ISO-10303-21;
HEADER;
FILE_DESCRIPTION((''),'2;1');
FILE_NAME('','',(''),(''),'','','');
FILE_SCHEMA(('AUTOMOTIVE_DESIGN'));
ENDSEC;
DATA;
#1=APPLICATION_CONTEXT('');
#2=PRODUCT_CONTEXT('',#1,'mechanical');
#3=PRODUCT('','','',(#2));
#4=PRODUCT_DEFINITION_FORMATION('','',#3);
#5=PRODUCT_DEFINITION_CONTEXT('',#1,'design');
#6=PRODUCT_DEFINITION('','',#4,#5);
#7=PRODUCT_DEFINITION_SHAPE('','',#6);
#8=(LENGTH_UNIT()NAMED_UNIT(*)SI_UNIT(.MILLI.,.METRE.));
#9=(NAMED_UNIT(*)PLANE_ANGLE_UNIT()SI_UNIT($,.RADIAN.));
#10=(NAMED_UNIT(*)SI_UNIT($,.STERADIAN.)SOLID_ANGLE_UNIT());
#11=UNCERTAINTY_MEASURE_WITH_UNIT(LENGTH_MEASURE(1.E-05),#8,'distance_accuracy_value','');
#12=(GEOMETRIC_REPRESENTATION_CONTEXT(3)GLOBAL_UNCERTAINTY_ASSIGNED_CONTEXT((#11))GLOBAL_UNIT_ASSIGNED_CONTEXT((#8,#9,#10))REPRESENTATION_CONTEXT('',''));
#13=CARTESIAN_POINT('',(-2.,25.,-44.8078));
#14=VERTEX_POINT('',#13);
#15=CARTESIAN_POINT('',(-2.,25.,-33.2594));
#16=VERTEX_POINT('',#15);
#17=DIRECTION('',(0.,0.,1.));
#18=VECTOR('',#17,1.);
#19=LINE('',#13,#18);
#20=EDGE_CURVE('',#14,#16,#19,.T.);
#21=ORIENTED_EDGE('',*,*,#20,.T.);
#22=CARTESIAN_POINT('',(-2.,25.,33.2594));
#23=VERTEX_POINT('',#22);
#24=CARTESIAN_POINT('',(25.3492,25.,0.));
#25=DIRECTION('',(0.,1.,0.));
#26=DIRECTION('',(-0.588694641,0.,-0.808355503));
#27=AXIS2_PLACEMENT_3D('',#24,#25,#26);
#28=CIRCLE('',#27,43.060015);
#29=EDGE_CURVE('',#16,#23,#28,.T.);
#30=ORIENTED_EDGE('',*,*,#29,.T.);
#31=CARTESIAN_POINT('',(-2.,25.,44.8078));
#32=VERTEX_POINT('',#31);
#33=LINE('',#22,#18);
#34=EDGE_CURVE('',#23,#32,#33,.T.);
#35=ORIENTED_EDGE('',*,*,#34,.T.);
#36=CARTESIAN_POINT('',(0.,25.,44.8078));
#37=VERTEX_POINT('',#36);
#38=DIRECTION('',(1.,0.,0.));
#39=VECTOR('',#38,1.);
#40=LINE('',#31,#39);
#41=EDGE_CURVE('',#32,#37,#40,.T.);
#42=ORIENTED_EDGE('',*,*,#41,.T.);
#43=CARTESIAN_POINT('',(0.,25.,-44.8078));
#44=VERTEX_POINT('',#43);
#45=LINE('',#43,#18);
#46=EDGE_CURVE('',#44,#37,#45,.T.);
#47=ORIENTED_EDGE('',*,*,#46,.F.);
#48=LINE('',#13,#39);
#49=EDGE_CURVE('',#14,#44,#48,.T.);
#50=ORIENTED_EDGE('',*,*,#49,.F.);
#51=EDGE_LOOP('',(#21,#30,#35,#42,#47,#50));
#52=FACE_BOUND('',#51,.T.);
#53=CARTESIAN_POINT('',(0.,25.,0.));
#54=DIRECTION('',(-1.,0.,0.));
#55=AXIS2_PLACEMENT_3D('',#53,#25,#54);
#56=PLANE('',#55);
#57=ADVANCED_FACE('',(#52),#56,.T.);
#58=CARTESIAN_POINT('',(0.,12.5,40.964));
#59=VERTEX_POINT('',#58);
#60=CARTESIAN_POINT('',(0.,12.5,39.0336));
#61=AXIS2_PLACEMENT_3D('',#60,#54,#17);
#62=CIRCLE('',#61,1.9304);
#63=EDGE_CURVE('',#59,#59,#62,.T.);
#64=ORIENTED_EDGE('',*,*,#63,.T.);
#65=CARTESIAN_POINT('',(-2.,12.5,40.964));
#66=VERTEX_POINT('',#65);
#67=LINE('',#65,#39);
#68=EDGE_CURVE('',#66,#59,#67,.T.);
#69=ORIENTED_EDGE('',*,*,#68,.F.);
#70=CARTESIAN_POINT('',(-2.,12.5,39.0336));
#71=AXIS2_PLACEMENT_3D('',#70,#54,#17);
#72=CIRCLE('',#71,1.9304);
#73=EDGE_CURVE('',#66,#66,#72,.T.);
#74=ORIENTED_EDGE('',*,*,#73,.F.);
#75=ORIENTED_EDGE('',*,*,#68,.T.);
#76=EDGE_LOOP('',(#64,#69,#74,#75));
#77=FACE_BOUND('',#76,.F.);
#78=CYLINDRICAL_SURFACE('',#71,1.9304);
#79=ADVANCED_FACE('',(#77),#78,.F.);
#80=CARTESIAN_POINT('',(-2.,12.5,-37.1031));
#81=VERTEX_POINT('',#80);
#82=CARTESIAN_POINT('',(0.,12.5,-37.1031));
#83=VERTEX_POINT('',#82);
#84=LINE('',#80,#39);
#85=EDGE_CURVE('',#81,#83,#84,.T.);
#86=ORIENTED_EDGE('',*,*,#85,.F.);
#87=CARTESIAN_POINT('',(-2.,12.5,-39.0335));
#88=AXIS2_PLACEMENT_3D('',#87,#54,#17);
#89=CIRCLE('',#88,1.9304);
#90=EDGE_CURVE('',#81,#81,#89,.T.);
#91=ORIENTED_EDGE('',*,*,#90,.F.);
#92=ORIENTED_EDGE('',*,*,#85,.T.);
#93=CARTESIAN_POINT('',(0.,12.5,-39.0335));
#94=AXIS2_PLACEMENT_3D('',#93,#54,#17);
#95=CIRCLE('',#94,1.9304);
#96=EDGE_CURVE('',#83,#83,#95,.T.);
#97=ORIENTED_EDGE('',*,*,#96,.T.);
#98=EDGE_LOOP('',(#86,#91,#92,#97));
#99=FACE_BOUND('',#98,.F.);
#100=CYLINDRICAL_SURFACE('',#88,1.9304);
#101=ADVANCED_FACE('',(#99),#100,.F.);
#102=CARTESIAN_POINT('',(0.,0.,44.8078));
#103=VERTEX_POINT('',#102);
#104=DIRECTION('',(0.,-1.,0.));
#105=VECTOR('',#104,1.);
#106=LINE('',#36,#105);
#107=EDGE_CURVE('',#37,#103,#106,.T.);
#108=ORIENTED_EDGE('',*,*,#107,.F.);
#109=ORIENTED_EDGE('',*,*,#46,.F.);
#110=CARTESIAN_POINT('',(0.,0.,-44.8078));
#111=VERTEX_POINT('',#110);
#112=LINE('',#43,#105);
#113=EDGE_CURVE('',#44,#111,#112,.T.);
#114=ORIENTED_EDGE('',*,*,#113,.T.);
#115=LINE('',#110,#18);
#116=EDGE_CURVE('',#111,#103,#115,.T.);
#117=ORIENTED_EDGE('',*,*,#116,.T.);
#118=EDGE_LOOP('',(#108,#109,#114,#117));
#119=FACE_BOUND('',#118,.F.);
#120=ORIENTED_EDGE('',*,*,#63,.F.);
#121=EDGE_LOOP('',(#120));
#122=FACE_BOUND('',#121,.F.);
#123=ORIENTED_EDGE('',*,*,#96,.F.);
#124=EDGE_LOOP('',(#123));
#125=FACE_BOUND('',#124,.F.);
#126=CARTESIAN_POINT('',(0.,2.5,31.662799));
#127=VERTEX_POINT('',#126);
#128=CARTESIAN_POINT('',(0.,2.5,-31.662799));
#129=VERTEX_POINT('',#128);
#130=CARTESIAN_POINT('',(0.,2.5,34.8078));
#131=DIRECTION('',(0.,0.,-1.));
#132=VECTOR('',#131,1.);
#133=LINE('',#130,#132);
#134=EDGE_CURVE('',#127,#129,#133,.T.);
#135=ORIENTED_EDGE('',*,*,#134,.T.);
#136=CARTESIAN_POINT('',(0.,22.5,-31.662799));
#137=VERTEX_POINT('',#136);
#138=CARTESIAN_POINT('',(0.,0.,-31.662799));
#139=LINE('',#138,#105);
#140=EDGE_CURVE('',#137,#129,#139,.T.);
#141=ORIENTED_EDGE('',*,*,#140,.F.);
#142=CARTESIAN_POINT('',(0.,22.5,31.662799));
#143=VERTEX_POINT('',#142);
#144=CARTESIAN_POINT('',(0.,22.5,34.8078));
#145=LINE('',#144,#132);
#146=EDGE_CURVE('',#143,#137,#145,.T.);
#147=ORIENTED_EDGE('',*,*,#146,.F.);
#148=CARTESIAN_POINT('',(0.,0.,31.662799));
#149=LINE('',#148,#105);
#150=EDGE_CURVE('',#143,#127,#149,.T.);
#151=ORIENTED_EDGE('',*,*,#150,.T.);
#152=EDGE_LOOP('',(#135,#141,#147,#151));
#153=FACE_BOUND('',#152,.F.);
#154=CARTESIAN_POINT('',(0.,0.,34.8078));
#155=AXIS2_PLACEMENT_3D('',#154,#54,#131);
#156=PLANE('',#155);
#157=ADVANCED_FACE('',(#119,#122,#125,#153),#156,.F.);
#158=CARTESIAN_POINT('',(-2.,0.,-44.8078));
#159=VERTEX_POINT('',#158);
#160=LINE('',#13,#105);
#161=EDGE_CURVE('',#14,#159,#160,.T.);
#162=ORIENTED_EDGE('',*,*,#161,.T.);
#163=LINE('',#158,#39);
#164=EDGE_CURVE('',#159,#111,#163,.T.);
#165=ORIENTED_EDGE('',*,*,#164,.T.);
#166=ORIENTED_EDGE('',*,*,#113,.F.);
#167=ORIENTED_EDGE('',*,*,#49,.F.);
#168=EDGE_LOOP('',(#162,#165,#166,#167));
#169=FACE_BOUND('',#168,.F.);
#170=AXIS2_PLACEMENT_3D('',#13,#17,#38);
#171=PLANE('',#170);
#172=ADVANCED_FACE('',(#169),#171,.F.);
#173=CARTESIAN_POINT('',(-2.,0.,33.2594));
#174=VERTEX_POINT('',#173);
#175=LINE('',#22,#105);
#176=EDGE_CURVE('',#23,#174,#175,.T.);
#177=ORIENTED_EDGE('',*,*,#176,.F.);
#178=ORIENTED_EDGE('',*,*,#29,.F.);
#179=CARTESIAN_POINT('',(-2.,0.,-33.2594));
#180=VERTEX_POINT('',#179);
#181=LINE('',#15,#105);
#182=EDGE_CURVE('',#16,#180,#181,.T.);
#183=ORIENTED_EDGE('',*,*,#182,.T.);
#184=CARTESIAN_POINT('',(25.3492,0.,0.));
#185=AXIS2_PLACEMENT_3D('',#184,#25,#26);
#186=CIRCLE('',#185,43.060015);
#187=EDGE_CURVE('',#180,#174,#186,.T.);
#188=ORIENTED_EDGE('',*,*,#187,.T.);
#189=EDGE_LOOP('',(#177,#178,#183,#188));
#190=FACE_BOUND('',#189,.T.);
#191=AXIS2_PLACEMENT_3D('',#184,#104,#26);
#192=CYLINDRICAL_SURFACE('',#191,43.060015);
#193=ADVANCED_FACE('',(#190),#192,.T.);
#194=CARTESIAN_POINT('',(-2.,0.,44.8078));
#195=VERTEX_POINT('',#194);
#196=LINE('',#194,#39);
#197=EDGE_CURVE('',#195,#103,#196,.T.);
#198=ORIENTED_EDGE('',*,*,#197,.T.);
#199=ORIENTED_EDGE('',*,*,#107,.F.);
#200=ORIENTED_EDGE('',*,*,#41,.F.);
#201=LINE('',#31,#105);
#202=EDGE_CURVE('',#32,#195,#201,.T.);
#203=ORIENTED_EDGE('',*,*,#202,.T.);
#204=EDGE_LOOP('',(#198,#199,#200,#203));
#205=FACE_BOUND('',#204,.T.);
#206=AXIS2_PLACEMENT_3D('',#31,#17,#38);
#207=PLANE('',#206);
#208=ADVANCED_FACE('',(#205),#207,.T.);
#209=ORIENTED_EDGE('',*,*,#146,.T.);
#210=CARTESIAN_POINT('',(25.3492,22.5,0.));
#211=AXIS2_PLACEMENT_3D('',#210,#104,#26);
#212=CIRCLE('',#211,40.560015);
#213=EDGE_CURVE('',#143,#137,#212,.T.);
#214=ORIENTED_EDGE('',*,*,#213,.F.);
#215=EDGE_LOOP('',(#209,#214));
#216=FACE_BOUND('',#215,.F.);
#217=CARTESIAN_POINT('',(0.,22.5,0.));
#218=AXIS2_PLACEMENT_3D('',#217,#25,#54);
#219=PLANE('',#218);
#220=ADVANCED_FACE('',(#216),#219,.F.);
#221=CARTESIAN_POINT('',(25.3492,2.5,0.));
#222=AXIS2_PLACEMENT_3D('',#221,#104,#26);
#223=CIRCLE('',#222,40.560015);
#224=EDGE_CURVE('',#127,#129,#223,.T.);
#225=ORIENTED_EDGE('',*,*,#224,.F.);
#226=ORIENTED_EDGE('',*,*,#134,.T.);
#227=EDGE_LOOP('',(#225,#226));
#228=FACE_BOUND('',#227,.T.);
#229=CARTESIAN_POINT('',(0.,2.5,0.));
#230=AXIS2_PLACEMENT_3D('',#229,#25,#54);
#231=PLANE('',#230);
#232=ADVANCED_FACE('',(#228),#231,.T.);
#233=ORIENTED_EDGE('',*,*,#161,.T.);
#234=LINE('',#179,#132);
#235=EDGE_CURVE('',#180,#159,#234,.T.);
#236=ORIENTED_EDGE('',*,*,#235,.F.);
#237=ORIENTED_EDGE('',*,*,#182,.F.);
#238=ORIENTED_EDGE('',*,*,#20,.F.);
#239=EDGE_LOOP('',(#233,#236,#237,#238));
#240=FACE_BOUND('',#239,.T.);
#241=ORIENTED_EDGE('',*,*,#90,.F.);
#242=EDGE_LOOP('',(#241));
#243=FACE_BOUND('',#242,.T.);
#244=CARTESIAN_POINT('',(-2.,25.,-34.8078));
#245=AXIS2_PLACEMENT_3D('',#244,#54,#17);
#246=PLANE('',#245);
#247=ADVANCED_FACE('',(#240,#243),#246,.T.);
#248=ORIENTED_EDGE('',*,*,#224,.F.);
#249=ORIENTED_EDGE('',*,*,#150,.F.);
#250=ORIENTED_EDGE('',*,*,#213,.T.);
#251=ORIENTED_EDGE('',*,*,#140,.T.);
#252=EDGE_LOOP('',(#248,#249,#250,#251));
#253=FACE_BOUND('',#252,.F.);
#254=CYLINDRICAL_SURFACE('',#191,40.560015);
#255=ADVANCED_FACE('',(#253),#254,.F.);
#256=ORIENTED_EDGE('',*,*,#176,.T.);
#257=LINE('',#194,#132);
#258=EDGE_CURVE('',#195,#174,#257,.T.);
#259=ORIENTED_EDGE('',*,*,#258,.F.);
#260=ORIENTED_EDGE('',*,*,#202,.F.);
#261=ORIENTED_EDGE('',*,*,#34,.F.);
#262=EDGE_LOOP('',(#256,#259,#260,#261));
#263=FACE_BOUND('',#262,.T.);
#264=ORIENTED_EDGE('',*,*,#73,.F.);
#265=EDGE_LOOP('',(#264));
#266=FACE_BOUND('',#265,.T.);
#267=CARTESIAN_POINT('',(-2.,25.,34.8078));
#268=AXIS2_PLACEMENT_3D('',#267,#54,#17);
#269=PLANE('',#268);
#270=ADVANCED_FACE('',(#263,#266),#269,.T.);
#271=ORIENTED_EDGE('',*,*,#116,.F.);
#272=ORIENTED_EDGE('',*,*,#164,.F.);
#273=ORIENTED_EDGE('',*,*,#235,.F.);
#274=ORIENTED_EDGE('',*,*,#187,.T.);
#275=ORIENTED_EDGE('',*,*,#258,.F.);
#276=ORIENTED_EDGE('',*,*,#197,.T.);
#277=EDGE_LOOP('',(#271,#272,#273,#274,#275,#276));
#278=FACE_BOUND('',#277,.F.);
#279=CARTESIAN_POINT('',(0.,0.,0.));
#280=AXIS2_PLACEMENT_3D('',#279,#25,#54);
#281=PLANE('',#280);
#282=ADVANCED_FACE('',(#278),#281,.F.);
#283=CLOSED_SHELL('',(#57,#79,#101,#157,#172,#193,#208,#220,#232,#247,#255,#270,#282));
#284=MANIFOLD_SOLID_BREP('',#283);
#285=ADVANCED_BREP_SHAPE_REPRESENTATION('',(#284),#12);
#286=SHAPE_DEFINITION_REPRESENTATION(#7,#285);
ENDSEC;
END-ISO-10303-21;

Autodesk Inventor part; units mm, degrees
ref_plane "YZ Plane" through (0, 0, 0) normal (1, 0, 0) x (0, 1, 0)
ref_plane "XZ Plane" through (0, 0, 0) normal (0, 1, 0) x (-1, 0, 0)
ref_plane "XY Plane" through (0, 0, 0) normal (0, 0, 1) x (1, 0, 0)
sketch "Sketch1" plane through (0, 0, 0) normal (0, 1, 0) x (-1, 0, 0)
  circle A0 centre (-25.3492, 0) radius 35.56 construction
  line L0 (0, 84.1375) -> (6.35, 84.1375) construction
  line L1 (6.35, 84.1375) -> (6.35, -68.2625) construction
  line L2 (6.35, -68.2625) -> (0, -68.2625) construction
  line L3 (0, -68.2625) -> (0, 84.1375) construction
  arc A1 (0, -34.8078) -> (0, 34.8078) centre (-25.3492, 0) ccw
  line L4 (0, 34.8078) -> (0, -34.8078)
  point P0 (0, 0)
  point P1 (6.35, 29.1432)
  point P2 (6.35, -29.1432)
  dimension "d0" = 71.12
  dimension "d1" = 25.3492
  dimension "d2" = 6.35
  dimension "d3" = 152.4
  dimension "d4" = 86.12
extrude "Extrusion1" add sketch "Sketch1" along normal blind 25
shell "Shell2" thickness 2.5 removed faces 1 at (0, 8.3333, 11.6026)
sketch "Sketch2" plane through (0, 25, 0) normal (0, 1, 0) x (1, 0, 0)
  line L0 (0, 34.8078) -> (-2, 34.8078)
  line L1 (-2, 34.8078) -> (-2, 44.8078)
  line L2 (-2, 44.8078) -> (0, 44.8078)
  line L3 (0, 44.8078) -> (0, 34.8078)
  line L4 (-2, 34.8078) -> (0, 34.8078)
  line L5 (0.2807, 0) -> (-17.7108, 0) construction
  arc A0 (0, 34.8078) -> (0, -34.8078) centre (25.3492, 0) ccw construction
  line L6 (0, 34.8078) -> (-2, 34.8078)
  line L7 (-2, 34.8078) -> (-2, 33.2594)
  line L8 (-2, 33.2594) -> (0, 33.2594)
  line L9 (0, 33.2594) -> (0, 34.8078)
  line L10 (0, -34.8078) -> (-2, -34.8078)
  line L11 (-2, -34.8078) -> (-2, -44.8078)
  line L12 (-2, -44.8078) -> (0, -44.8078)
  line L13 (0, -44.8078) -> (0, -34.8078)
  line L14 (-2, -34.8078) -> (0, -34.8078)
  arc A1 (0, 34.8078) -> (0, -34.8078) centre (25.3492, 0) ccw construction
  line L15 (0, -34.8078) -> (-2, -34.8078)
  line L16 (-2, -34.8078) -> (-2, -33.2594)
  line L17 (-2, -33.2594) -> (0, -33.2594)
  line L18 (0, -33.2594) -> (0, -34.8078)
  point P0 (0, 0)
  dimension "d9" = 2
  dimension "d10" = 10
  dimension "d15" = 0
  dimension "d16" = 2
extrude "Extrusion2" add sketch "Sketch2" against normal up to surface (25 mm away)
sketch "Sketch3" plane through (-2, 25, 33.2594) normal (-1, 0, 0) x (0, 0, 1)
  circle A0 centre (5.7742, -12.5) radius 1.9304
  line L0 (11.5484, -25) -> (0, -25) projected
  line L1 (0, 0) -> (11.5484, 0) projected
  line L2 (0, -25) -> (0, 0) projected
  line L3 (11.5484, 0) -> (11.5484, -25) projected
  circle A1 centre (-72.2929, -12.5) radius 1.9304
  line L4 (-78.0671, 0) -> (-78.0671, -25) projected
  line L5 (-78.0671, 0) -> (-66.5187, 0) projected
  point P0 (-33.2594, -25)
  dimension "d17" = 3.8608
  dimension "d18" = 25
  dimension "d19" = 12.5
  dimension "d20" = 11.5484
  dimension "d21" = 5.7742
  dimension "d22" = 3.8608
  dimension "d23" = 5.7742
  dimension "d24" = 12.5
extrude "Extrusion3" cut sketch "Sketch3" against normal through all contours A0 | A1
equation "\"d19\" = 0.5 * d18"
equation "\"d21\" = 0.5 * d20"
equation "\"d23\" = d21"
equation "\"d24\" = d19"
properties part number "sprocket cover"
